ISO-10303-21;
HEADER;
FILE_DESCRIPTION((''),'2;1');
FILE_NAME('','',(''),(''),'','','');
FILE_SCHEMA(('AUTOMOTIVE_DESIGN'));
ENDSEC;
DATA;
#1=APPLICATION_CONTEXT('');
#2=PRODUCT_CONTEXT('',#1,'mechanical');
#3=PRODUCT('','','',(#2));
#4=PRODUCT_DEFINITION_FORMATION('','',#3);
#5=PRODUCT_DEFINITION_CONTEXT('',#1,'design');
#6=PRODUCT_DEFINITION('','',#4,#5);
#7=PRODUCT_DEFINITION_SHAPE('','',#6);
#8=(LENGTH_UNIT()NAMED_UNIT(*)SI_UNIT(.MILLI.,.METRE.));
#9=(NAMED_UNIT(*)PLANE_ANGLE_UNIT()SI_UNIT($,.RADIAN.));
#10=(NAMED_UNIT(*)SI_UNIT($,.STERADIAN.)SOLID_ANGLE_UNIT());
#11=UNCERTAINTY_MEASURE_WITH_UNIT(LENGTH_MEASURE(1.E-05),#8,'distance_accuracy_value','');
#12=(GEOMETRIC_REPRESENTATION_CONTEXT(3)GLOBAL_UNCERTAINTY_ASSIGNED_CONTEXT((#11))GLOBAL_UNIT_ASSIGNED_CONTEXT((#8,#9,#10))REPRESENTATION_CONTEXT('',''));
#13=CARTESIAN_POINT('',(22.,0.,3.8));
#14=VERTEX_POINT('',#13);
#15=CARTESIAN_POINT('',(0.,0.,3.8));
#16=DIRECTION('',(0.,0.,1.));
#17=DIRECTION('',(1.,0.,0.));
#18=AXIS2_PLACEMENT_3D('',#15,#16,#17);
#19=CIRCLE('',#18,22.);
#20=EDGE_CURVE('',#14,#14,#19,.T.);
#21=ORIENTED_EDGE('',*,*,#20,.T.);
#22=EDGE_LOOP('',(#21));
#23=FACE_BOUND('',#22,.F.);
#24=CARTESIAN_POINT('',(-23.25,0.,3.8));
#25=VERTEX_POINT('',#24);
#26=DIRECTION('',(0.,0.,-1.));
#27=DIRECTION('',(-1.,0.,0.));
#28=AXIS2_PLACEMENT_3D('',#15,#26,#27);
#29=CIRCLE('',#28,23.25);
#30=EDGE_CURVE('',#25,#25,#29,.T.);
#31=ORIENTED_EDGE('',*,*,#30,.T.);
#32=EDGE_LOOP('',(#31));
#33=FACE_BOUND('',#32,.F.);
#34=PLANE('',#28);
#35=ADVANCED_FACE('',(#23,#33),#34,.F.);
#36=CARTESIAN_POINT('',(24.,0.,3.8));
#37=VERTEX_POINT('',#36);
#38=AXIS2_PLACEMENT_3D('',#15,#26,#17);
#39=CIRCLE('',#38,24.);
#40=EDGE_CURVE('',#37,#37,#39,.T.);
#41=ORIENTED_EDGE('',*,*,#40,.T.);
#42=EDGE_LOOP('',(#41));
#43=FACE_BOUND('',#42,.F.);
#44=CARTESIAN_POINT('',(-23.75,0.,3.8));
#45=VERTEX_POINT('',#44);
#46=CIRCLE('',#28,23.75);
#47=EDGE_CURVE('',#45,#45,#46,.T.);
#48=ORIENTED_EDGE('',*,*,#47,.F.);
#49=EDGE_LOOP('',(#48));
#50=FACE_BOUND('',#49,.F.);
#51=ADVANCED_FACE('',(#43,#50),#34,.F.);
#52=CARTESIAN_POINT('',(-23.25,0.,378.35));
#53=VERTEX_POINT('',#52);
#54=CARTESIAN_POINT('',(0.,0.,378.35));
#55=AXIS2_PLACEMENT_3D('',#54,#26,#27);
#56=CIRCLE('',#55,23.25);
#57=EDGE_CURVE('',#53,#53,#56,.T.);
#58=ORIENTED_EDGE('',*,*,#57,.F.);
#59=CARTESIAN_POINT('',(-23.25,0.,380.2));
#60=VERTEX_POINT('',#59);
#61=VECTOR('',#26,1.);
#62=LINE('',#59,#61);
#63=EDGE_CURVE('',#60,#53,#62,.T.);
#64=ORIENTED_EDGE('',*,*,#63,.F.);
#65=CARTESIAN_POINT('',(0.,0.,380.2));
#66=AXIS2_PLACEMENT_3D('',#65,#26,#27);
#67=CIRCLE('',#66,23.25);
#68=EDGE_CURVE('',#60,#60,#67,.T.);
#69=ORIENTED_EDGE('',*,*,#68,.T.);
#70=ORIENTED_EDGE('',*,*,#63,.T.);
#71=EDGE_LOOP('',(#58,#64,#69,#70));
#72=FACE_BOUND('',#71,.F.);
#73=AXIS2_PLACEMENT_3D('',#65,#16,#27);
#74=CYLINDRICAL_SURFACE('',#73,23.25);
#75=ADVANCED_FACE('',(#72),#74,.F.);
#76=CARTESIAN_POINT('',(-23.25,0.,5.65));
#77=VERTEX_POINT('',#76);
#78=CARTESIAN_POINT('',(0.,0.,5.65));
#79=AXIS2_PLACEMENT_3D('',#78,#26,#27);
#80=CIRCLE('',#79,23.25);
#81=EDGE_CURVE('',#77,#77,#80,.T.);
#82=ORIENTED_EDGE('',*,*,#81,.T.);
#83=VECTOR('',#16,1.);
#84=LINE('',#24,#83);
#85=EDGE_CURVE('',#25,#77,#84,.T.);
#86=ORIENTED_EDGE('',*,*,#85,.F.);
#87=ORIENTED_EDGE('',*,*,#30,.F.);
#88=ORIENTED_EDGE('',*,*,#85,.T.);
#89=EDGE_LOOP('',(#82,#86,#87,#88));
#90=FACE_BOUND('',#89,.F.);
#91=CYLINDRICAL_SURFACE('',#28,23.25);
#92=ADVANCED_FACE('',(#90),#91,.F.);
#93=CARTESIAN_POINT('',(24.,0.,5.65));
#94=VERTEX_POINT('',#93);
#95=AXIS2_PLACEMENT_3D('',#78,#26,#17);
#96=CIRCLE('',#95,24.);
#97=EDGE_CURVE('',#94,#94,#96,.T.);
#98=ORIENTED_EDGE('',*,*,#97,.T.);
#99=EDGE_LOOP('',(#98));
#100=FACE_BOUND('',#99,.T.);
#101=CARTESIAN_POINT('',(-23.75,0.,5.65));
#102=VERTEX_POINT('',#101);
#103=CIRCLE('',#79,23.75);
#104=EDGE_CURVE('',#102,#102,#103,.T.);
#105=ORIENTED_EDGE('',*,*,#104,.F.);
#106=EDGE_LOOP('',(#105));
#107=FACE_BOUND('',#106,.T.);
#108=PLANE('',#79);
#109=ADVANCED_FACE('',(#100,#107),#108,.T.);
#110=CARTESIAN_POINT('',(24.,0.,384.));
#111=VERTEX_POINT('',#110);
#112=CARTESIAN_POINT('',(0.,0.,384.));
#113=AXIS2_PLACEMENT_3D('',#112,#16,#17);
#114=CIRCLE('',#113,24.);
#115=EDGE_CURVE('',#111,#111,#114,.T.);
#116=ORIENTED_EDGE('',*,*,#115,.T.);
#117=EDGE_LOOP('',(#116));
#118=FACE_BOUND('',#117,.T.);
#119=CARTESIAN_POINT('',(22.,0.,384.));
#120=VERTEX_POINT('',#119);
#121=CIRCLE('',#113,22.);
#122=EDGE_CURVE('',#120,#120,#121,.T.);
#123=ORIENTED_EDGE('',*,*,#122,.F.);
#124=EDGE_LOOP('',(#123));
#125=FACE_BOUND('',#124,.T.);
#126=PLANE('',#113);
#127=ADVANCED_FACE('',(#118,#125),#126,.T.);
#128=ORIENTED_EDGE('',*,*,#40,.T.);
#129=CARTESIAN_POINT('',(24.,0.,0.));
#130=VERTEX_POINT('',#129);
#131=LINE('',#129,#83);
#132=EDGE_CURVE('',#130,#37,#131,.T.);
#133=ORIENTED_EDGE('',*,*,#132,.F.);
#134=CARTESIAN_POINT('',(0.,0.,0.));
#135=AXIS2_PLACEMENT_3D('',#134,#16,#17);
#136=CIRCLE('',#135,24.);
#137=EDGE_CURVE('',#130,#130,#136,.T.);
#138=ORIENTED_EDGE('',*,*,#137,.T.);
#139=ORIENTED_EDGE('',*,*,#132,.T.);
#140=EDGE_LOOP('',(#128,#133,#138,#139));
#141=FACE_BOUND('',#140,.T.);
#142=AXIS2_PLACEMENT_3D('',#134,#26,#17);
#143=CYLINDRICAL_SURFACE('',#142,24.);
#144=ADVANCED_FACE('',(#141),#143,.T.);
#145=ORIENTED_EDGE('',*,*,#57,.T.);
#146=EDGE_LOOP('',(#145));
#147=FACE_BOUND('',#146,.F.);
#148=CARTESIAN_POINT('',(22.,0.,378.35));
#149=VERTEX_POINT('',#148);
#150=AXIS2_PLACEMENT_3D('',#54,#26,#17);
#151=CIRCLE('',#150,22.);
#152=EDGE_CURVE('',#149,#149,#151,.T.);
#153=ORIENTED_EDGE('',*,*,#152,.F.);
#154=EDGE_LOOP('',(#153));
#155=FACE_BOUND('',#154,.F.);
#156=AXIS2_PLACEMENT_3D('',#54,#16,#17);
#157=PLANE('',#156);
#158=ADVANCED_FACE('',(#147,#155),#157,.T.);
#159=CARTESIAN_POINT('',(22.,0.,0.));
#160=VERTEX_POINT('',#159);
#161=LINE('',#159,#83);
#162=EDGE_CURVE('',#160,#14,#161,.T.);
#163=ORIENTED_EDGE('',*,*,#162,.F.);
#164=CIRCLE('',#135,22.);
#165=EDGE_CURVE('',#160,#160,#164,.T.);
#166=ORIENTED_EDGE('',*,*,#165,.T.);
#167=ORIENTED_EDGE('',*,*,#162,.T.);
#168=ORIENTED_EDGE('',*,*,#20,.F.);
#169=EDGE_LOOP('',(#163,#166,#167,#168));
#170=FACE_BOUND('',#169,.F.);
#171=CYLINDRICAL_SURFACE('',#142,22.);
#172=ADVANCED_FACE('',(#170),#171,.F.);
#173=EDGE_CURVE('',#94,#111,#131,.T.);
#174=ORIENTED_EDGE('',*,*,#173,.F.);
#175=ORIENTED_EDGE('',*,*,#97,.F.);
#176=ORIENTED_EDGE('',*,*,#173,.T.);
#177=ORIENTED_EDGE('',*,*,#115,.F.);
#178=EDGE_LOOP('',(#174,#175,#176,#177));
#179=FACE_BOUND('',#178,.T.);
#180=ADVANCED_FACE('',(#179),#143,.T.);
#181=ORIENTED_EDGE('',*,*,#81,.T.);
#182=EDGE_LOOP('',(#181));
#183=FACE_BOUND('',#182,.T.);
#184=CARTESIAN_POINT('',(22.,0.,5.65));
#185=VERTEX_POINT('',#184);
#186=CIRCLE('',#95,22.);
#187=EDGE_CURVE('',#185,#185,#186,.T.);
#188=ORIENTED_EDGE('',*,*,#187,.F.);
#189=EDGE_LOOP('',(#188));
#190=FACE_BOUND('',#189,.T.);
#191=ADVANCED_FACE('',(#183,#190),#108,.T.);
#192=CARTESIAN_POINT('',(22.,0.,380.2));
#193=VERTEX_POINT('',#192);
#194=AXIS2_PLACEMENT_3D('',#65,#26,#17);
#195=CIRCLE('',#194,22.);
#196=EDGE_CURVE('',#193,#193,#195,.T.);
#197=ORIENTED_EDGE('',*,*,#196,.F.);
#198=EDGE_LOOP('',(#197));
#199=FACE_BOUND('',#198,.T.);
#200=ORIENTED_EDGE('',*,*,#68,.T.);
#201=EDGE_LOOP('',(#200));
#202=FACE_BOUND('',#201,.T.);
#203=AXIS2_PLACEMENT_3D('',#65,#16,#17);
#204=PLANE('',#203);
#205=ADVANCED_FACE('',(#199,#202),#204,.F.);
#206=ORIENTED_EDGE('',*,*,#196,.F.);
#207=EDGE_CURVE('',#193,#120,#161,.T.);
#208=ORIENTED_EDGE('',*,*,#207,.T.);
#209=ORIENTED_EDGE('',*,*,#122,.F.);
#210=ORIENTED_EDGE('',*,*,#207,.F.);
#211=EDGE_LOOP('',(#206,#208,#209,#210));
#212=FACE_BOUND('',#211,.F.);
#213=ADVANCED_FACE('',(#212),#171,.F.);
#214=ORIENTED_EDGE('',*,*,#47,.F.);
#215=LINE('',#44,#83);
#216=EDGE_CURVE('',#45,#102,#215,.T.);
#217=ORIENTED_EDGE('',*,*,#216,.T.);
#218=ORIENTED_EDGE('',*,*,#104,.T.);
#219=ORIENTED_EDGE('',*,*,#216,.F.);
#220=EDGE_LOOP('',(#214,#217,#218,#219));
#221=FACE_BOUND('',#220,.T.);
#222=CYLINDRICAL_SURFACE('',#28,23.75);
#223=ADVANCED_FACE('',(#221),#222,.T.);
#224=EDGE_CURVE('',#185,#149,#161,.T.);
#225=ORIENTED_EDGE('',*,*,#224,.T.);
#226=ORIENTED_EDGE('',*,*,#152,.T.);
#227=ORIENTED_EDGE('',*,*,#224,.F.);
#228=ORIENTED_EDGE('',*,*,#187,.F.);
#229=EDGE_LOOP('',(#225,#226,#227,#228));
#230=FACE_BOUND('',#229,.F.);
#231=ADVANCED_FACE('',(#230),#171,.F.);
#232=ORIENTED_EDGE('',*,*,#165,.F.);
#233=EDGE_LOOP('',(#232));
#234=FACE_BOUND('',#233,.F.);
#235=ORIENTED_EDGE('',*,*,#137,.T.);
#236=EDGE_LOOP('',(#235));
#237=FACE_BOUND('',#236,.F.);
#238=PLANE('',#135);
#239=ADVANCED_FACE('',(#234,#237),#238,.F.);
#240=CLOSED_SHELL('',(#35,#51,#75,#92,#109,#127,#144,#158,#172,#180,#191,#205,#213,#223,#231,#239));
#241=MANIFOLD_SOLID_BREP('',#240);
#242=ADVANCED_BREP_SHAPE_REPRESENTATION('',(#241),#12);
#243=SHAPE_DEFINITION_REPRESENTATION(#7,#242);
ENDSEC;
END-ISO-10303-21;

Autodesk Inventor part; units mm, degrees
ref_plane "YZ Plane" through (0, 0, 0) normal (1, 0, 0) x (0, 1, 0)
sketch "Sketch1" plane through (0, 0, 0) normal (0, 0, 1) x (1, 0, 0)
  circle A0 centre (0, 0) radius 24
  circle A1 centre (0, 0) radius 22
  dimension "d0" = 48
  dimension "d1" = 44
extrude "Extrusion1" add sketch "Sketch1" along normal blind 384
ref_plane "Work Plane1" through (0, 0, 192) normal (0, 0, 1) x (1, 0, 0)
ref_plane "Work Plane2" through (0, 0, 3.8) normal (0, 0, -1) x (-1, 0, 0)
sketch "Sketch2" plane through (0, 0, 0) normal (0, 0, -1) x (-1, 0, 0)
  circle A0 centre (0, 0) radius 23.25
  circle A1 centre (0, 0) radius 22 projected
  dimension "d4" = 46.5
extrude "Extrusion2" cut sketch "Sketch2" against normal blind 1.85 from surface at -3.8
mirror "Mirror1" about plane through (0, 0, 192) normal (0, 0, 1) of "Extrusion2"
sketch "Sketch3" plane through (0, 0, 0) normal (0, 0, -1) x (-1, 0, 0)
  circle A0 centre (0, 0) radius 23.75
  circle A1 centre (0, 0) radius 24 projected
  dimension "d8" = 47.5
extrude "Extrusion3" cut sketch "Sketch3" against normal up to surface (1.85 mm away) from surface at -3.8
properties part number "SRM 2020 Casing EE5" material "Aluminum 6061"
